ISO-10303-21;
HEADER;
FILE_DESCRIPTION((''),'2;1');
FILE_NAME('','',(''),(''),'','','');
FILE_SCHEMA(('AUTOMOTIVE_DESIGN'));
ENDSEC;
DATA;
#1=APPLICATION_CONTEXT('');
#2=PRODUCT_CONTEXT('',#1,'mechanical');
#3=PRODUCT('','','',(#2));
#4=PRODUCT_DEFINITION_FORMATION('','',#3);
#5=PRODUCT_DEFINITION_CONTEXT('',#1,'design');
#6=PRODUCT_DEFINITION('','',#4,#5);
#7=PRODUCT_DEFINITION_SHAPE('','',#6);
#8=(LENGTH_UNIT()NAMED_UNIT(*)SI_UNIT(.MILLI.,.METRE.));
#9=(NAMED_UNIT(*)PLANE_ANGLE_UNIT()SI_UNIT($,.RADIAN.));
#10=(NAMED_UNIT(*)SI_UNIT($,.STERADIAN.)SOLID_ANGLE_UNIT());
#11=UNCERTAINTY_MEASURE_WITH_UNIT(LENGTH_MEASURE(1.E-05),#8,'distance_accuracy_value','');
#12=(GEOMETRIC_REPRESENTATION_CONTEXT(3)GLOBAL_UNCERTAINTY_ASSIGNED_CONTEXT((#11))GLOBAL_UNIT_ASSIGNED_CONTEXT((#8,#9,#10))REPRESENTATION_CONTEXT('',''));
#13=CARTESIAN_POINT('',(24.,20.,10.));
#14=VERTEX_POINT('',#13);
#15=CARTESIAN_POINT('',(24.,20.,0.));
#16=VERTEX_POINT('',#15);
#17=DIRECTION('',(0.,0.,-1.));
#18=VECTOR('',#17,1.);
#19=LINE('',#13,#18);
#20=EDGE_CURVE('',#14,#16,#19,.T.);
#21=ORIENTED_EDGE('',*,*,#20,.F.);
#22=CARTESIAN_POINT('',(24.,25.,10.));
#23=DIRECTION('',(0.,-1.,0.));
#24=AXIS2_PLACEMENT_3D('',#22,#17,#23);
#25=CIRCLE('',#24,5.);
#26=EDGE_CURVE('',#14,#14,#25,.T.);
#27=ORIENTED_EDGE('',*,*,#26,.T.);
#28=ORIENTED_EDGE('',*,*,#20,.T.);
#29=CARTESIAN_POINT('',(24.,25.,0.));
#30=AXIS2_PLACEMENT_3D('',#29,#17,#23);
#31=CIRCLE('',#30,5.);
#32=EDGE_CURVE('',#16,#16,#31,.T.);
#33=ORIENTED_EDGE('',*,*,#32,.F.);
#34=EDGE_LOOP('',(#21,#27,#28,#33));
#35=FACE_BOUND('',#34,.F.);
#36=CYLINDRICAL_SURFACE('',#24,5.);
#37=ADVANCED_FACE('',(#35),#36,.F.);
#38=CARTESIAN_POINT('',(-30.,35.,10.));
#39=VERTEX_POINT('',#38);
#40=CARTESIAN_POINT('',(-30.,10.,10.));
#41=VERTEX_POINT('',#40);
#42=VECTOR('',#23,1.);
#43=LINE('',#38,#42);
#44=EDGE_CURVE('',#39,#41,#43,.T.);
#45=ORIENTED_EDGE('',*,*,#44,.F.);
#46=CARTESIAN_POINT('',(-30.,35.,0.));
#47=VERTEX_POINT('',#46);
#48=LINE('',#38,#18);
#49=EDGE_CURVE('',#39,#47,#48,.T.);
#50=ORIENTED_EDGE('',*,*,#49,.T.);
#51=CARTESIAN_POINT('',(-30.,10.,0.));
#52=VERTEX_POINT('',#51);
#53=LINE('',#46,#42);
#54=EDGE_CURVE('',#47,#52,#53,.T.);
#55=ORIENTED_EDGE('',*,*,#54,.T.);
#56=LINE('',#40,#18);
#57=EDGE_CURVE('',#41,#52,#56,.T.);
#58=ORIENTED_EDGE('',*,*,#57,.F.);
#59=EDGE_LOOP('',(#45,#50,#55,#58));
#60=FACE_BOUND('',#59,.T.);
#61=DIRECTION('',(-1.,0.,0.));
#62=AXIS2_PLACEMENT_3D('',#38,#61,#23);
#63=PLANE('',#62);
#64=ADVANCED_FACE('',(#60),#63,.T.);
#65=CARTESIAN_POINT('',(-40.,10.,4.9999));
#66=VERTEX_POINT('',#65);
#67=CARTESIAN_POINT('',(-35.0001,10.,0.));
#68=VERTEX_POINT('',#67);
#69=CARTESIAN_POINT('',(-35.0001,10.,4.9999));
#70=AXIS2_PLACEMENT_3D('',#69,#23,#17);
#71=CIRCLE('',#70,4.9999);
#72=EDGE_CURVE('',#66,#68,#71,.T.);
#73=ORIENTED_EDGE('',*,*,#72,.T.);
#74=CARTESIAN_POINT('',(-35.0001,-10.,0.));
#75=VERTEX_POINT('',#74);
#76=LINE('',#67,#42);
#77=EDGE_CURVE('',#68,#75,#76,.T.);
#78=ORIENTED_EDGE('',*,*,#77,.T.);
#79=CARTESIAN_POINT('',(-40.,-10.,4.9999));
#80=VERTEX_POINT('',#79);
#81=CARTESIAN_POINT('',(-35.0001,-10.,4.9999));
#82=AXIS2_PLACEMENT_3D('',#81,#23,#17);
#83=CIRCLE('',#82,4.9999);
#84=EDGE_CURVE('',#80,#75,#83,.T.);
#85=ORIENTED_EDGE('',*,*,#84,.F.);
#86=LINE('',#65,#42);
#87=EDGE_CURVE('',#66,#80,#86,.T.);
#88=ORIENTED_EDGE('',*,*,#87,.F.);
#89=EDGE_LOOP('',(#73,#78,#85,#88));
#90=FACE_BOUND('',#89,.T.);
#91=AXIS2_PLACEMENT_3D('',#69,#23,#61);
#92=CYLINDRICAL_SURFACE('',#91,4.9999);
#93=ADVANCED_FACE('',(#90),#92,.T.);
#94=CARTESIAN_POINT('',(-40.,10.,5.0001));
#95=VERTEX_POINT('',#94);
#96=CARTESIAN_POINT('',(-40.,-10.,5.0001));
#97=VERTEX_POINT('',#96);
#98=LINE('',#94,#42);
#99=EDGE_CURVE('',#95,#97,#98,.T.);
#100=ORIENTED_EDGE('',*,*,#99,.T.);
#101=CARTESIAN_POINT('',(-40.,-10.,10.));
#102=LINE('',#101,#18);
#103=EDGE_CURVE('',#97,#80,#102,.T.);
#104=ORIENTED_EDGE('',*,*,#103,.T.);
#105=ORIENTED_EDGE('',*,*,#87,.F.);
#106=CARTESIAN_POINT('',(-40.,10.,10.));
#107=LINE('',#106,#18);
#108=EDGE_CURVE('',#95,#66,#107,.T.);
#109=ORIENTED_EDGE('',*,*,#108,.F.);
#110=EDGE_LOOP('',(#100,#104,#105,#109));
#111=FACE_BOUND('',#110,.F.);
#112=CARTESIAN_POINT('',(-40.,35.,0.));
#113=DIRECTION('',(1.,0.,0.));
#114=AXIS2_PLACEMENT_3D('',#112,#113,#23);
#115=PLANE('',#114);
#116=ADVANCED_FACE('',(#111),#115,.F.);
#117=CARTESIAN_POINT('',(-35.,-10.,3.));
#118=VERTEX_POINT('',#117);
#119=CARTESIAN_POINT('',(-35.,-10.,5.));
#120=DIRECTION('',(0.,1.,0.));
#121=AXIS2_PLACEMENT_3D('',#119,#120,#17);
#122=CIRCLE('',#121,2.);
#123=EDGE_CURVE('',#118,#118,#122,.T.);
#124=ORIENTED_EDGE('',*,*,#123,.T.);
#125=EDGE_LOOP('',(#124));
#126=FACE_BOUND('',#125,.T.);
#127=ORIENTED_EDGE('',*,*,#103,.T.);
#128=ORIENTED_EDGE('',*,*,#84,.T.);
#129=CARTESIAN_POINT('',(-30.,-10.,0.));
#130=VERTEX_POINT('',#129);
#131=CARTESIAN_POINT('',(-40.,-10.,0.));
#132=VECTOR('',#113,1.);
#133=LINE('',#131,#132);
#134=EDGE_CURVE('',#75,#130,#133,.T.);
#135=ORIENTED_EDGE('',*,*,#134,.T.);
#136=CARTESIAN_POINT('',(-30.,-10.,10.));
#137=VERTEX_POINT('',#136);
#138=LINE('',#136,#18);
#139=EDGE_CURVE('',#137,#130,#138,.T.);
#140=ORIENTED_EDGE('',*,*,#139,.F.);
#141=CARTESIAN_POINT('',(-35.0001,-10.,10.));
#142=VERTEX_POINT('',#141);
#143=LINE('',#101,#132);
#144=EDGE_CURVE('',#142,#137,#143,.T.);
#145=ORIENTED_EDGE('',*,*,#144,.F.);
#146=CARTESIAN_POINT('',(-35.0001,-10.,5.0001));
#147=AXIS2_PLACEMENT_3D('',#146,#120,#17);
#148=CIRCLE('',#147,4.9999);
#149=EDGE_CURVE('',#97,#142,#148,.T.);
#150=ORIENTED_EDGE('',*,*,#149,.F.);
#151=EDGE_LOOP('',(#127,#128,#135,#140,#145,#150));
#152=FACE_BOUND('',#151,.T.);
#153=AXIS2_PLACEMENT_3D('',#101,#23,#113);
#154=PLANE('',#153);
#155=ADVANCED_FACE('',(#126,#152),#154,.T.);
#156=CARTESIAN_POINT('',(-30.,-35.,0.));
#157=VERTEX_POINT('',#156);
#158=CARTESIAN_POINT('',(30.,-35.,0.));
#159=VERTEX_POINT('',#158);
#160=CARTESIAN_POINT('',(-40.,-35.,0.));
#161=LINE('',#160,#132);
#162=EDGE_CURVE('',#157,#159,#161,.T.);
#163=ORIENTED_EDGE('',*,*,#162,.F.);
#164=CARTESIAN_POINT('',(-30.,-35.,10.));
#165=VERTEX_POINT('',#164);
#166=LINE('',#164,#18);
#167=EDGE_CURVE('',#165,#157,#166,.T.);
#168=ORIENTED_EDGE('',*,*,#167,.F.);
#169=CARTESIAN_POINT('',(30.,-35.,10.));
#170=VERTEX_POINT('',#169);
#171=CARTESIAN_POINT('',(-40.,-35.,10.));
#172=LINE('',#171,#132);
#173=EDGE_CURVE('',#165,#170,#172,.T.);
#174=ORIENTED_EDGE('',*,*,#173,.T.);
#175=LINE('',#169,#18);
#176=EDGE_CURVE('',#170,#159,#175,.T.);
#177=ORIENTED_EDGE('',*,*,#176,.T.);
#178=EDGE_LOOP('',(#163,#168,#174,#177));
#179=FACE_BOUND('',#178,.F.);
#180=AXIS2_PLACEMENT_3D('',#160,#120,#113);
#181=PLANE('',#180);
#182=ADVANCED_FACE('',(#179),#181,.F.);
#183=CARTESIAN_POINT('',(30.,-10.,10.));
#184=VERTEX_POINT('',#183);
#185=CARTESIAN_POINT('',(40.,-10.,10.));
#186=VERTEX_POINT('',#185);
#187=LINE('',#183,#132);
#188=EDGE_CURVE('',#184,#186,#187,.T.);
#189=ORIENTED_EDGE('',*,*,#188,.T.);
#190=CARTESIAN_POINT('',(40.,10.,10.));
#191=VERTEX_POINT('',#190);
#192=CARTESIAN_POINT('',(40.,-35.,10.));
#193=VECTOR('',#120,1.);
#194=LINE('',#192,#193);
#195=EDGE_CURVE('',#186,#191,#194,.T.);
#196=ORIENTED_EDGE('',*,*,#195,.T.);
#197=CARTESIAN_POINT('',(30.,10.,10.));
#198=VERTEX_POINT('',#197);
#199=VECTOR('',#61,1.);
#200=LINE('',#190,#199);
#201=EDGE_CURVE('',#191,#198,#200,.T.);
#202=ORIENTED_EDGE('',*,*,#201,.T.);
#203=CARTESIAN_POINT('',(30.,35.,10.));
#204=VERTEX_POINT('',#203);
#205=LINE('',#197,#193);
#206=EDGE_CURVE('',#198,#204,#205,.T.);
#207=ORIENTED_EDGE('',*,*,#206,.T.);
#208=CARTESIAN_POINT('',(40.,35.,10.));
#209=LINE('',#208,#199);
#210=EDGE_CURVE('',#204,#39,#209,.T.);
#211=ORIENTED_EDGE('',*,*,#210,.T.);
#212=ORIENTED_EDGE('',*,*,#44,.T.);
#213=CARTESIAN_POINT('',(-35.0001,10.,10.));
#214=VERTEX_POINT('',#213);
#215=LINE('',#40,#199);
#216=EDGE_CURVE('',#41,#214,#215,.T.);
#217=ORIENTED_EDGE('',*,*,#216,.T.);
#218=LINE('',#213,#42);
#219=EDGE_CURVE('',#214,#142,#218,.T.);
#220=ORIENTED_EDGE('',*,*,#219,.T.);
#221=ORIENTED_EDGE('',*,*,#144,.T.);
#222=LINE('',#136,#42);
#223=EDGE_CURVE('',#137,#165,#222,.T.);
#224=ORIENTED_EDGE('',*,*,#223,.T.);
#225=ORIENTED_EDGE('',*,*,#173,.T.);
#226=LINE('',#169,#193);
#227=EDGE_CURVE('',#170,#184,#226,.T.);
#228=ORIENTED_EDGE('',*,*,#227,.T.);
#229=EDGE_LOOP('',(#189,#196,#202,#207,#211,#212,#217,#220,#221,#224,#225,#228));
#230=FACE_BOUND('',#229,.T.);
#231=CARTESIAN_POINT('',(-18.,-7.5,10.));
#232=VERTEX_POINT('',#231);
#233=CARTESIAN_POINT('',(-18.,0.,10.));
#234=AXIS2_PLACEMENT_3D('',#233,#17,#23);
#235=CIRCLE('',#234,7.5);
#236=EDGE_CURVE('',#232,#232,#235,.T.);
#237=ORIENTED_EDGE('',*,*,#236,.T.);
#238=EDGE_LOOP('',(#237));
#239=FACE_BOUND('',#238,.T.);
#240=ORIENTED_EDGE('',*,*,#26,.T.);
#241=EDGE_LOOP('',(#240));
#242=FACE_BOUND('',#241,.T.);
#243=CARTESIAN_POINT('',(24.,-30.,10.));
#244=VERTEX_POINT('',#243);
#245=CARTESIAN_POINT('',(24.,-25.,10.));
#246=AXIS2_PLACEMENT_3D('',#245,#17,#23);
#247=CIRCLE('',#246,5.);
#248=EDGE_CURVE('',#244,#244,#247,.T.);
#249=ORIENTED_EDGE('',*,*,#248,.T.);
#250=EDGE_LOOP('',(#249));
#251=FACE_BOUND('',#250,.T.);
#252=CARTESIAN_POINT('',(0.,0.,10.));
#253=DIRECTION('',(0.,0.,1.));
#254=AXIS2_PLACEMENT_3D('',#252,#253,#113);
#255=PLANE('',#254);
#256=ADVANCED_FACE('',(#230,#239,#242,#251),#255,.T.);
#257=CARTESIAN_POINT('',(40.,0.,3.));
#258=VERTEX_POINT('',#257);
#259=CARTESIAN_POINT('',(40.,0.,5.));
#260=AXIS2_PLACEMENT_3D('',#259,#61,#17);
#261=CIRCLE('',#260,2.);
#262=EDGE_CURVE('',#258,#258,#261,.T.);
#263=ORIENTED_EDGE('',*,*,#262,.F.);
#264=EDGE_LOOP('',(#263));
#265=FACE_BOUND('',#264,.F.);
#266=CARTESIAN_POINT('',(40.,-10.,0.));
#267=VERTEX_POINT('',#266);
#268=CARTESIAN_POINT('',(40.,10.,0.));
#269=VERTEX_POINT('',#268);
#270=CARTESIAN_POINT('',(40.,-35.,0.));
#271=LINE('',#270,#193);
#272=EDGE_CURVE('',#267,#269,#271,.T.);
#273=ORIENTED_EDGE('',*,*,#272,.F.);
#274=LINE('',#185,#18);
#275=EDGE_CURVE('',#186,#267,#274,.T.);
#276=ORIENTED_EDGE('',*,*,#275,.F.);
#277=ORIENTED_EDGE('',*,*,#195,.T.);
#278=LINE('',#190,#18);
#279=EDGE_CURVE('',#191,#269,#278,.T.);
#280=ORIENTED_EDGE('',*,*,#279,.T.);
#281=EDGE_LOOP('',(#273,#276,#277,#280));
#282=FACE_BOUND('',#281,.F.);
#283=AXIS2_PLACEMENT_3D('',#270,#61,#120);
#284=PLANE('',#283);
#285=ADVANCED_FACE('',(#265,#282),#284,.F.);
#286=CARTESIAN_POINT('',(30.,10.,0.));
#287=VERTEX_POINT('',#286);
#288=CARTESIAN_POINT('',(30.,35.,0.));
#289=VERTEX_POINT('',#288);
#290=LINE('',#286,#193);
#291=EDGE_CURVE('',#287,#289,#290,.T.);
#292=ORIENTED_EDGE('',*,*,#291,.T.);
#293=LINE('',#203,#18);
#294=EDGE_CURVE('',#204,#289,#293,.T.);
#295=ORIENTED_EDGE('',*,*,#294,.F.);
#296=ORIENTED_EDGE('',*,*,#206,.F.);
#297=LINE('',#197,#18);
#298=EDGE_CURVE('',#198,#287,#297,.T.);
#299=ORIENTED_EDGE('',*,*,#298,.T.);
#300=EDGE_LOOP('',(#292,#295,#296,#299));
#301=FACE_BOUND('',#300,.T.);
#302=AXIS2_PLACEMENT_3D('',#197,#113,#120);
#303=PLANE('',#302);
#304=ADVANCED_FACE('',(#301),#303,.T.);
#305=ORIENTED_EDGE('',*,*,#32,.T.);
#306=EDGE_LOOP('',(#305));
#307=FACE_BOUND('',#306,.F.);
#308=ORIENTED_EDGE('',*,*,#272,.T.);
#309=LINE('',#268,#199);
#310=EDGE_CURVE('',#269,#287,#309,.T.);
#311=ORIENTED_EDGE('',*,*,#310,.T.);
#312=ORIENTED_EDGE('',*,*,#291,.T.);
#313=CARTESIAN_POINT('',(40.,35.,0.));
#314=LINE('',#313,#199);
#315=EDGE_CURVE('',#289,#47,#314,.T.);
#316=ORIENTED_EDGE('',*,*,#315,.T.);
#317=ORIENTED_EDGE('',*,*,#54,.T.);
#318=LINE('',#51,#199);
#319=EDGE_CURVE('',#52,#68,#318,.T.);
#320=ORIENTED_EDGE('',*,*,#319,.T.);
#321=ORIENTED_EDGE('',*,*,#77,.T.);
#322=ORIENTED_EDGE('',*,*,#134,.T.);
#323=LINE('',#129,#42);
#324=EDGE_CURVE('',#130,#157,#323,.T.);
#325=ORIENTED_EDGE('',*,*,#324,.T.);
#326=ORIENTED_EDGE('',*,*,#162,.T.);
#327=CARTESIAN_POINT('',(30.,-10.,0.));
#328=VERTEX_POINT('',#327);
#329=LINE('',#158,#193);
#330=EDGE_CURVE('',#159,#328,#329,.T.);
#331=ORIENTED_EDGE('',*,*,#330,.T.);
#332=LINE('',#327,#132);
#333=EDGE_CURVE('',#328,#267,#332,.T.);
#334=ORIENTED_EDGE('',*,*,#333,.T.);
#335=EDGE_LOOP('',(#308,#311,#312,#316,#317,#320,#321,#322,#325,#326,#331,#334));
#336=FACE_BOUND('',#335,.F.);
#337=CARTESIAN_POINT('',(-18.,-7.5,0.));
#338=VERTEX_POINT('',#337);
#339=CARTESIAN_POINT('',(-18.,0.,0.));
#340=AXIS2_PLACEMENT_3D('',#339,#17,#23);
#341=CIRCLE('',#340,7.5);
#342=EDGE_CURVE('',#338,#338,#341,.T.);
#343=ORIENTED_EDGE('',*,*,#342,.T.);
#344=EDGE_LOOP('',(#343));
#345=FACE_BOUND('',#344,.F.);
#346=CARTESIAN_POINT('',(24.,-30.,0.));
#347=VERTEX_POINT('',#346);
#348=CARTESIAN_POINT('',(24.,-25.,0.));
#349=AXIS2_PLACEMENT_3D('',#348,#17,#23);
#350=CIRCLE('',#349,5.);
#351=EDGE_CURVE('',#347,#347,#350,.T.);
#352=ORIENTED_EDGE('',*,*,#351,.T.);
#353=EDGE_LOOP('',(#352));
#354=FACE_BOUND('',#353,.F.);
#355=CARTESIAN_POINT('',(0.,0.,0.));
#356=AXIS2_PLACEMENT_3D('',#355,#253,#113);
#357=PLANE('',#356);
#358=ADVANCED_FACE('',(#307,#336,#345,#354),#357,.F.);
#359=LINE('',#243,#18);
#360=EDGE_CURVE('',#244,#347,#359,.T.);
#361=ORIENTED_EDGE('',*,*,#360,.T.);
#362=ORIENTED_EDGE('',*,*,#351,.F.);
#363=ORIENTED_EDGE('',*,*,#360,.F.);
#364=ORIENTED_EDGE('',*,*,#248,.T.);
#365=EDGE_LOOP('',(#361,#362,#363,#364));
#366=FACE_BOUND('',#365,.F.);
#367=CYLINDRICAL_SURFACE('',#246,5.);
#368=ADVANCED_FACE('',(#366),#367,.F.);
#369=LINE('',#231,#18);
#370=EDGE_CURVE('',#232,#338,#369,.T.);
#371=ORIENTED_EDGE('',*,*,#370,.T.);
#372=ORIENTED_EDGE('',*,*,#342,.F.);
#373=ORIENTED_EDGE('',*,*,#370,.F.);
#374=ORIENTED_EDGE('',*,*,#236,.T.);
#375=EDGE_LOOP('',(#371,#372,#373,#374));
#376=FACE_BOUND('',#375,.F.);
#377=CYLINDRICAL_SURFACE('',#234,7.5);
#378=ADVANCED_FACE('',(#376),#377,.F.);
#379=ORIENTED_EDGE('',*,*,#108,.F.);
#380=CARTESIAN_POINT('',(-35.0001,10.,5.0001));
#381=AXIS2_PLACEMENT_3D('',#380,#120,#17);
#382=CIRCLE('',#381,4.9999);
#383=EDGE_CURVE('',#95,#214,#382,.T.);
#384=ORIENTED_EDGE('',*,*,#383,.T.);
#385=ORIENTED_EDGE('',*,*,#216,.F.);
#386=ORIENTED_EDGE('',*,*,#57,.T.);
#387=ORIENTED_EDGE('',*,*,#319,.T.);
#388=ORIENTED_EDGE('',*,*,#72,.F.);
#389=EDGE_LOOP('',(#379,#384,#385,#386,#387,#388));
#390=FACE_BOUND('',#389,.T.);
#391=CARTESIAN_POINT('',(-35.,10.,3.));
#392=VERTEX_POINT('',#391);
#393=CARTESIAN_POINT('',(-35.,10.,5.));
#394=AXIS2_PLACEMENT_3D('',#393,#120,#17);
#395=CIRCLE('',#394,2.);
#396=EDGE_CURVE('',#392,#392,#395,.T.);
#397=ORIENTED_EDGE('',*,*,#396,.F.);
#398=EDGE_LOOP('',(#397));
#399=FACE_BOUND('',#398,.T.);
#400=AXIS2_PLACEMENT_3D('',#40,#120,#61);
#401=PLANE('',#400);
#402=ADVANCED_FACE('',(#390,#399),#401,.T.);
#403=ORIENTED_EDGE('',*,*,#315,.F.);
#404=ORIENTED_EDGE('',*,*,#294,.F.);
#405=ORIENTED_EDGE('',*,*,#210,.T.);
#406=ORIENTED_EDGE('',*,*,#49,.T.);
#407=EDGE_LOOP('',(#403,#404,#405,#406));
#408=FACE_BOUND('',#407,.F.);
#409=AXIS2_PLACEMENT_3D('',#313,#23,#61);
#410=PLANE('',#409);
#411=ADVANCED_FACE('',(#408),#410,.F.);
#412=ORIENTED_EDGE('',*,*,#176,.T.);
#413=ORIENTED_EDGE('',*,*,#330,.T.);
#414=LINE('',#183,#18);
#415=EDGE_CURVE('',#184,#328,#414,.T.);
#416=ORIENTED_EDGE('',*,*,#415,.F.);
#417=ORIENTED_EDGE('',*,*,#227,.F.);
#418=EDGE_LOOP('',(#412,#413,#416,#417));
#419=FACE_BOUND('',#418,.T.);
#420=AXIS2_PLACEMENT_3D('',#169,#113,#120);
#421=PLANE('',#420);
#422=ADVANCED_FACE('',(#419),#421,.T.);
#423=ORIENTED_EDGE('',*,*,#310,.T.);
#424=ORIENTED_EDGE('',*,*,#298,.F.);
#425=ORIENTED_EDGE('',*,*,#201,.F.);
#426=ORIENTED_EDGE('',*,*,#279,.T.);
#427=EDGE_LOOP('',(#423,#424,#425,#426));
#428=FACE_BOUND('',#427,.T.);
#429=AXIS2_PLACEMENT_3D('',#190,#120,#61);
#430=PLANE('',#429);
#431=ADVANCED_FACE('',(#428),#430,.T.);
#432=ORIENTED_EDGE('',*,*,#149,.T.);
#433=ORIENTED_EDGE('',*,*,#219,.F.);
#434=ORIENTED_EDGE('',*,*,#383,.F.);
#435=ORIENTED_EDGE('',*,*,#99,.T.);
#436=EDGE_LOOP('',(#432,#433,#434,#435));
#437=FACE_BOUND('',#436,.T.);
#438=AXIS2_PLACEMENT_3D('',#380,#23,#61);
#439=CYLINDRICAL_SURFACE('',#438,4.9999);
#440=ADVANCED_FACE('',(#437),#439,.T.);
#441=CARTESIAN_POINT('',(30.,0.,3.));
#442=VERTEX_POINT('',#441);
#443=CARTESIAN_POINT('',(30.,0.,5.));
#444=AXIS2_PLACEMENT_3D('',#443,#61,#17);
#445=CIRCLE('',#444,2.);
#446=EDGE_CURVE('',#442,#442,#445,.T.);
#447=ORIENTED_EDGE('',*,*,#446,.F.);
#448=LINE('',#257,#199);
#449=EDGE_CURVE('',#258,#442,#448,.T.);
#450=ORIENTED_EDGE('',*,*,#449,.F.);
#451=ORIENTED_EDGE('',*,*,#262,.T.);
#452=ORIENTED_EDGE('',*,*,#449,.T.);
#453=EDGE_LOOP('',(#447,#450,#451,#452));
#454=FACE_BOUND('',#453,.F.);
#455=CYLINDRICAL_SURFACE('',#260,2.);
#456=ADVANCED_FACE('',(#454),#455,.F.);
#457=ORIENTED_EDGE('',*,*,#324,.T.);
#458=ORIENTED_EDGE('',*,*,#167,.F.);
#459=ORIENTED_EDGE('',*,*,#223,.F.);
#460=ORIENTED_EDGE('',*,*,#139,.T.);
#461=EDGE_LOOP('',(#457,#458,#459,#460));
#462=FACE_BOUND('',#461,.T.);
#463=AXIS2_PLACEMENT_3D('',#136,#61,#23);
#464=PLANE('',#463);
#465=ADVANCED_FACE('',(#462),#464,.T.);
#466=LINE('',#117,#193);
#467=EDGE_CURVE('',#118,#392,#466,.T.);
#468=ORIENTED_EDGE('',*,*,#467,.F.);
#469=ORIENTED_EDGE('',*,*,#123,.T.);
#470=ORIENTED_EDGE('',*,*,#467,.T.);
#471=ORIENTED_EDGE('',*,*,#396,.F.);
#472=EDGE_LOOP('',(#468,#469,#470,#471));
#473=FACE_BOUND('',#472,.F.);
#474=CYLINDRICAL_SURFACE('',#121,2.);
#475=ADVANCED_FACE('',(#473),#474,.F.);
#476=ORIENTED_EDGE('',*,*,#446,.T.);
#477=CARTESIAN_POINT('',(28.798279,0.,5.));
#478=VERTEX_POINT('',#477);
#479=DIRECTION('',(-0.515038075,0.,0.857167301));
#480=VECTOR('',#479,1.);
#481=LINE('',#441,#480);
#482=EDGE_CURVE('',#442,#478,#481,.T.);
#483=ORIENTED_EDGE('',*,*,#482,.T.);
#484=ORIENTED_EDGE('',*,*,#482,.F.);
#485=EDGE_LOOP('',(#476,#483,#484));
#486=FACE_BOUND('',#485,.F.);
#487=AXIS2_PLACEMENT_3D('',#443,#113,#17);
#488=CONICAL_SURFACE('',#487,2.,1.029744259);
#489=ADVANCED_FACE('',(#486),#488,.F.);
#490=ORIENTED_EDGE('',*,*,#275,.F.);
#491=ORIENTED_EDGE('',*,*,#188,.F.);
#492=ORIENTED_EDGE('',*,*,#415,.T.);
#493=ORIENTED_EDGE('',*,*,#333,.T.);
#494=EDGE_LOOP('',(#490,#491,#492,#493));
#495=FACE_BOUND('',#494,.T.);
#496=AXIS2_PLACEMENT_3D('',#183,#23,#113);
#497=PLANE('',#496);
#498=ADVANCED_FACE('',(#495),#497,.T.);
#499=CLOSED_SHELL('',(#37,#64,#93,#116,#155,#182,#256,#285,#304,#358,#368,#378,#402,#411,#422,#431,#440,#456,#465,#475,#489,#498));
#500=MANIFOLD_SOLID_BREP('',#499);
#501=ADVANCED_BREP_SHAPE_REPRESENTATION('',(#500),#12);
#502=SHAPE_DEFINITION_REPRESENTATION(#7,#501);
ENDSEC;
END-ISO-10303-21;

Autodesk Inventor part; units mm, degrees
ref_plane "YZ Plane" through (0, 0, 0) normal (1, 0, 0) x (0, 1, 0)
ref_plane "XZ Plane" through (0, 0, 0) normal (0, 1, 0) x (-1, 0, 0)
ref_plane "XY Plane" through (0, 0, 0) normal (0, 0, 1) x (1, 0, 0)
sketch "Skizze1" plane through (0, 0, 0) normal (0, 0, 1) x (1, 0, 0)
  line L0 (-40, -35) -> (40, -35)
  line L1 (40, -35) -> (40, 35)
  line L2 (40, 35) -> (-40, 35)
  line L3 (-40, 35) -> (-40, -35)
  line L4 (-40, -35) -> (40, 35) construction
  line L5 (40, -35) -> (-40, 35) construction
  point P0 (0, 0)
  dimension "d0" = 80
  dimension "d1" = 70
extrude "Extrusion1" add sketch "Skizze1" along normal blind 10
sketch "Skizze2" plane through (0, 0, 10) normal (0, 0, 1) x (1, 0, 0)
  line L0 (-40, 35) -> (-30, 35)
  line L1 (-30, 35) -> (-30, 10)
  line L2 (-30, 10) -> (-40, 10)
  line L3 (-40, 10) -> (-40, 35)
  line L4 (-40, 35) -> (-40, -35) projected
  line L5 (-30, -35) -> (-40, -35)
  line L6 (-40, -35) -> (-40, -10)
  line L7 (-40, -10) -> (-30, -10)
  line L8 (-30, -10) -> (-30, -35)
  line L9 (40, 35) -> (-40, 35) projected
  line L10 (40, -35) -> (40, 35) projected
  line L11 (30, 35) -> (40, 35)
  line L12 (40, 35) -> (40, 10)
  line L13 (40, 10) -> (30, 10)
  line L14 (30, 10) -> (30, 35)
  line L15 (30, -10) -> (40, -10)
  line L16 (40, -10) -> (40, -35)
  line L17 (40, -35) -> (30, -35)
  line L18 (30, -35) -> (30, -10)
  point P0 (0, 0)
  dimension "d4" = 10
  dimension "d5" = 10
  dimension "d6" = 20
  dimension "d7" = 20
  dimension "d8" = 25
  dimension "d9" = 25
extrude "Extrusion2" cut sketch "Skizze2" against normal blind 10
sketch "Skizze3" plane through (0, 0, 10) normal (0, 0, 1) x (1, 0, 0)
  line L0 (-30, -35) -> (30, -35) projected
  line L1 (-30, 10) -> (-40, 10) projected
  line L2 (40, -10) -> (40, 10) projected
  line L3 (30, -35) -> (30, -10) projected
  point P0 (0, 0)
  point P1 (24, 25)
  point P2 (24, -25)
  dimension "d12" = 10
  dimension "d13" = 50
  dimension "d17" = 16
hole "Bohrung1" at (24, 25, 10) at (24, -25, 10) direction (0, 0, -1) diameter 10 end through all
sketch "Skizze4" plane through (0, 0, 10) normal (0, 0, 1) x (1, 0, 0)
  line L0 (40, -10) -> (40, 10) projected
  line L1 (-30, 10) -> (-40, 10) projected
  point P0 (0, 0)
  point P1 (-18, 0)
  dimension "d25" = 58
  dimension "d26" = 10
hole "Bohrung2" at (-18, 0, 10) direction (0, 0, -1) diameter 15 end through all
sketch "Skizze5" plane through (-40, -10, 10) normal (0, -1, 0) x (1, 0, 0)
  line L0 (0, 0) -> (10, 0) projected
  line L1 (10, 0) -> (10, -10) projected
  point P0 (40, -10)
  point P1 (5, -5)
  dimension "d34" = 5
  dimension "d35" = 5
hole "Bohrung3" at (-35, -10, 5) direction (0, 1, 0) diameter 4 end through all
sketch "Skizze6" plane through (40, -10, 0) normal (1, 0, 0) x (0, 0, -1)
  line L0 (0, 20) -> (-10, 20) projected
  line L1 (0, 0) -> (0, 20) projected
  point P0 (0, 10)
  point P1 (-5, 10)
  dimension "d43" = 10
  dimension "d44" = 5
hole "Bohrung4" at (40, 0, 5) direction (-1, 0, 0) diameter 4 depth 10 tip angle 118
fillet "Rundung1" radius 5 2 edges at (-40, 0, 0) (-40, 0, 10)
properties part number "ABI_Deckel"
